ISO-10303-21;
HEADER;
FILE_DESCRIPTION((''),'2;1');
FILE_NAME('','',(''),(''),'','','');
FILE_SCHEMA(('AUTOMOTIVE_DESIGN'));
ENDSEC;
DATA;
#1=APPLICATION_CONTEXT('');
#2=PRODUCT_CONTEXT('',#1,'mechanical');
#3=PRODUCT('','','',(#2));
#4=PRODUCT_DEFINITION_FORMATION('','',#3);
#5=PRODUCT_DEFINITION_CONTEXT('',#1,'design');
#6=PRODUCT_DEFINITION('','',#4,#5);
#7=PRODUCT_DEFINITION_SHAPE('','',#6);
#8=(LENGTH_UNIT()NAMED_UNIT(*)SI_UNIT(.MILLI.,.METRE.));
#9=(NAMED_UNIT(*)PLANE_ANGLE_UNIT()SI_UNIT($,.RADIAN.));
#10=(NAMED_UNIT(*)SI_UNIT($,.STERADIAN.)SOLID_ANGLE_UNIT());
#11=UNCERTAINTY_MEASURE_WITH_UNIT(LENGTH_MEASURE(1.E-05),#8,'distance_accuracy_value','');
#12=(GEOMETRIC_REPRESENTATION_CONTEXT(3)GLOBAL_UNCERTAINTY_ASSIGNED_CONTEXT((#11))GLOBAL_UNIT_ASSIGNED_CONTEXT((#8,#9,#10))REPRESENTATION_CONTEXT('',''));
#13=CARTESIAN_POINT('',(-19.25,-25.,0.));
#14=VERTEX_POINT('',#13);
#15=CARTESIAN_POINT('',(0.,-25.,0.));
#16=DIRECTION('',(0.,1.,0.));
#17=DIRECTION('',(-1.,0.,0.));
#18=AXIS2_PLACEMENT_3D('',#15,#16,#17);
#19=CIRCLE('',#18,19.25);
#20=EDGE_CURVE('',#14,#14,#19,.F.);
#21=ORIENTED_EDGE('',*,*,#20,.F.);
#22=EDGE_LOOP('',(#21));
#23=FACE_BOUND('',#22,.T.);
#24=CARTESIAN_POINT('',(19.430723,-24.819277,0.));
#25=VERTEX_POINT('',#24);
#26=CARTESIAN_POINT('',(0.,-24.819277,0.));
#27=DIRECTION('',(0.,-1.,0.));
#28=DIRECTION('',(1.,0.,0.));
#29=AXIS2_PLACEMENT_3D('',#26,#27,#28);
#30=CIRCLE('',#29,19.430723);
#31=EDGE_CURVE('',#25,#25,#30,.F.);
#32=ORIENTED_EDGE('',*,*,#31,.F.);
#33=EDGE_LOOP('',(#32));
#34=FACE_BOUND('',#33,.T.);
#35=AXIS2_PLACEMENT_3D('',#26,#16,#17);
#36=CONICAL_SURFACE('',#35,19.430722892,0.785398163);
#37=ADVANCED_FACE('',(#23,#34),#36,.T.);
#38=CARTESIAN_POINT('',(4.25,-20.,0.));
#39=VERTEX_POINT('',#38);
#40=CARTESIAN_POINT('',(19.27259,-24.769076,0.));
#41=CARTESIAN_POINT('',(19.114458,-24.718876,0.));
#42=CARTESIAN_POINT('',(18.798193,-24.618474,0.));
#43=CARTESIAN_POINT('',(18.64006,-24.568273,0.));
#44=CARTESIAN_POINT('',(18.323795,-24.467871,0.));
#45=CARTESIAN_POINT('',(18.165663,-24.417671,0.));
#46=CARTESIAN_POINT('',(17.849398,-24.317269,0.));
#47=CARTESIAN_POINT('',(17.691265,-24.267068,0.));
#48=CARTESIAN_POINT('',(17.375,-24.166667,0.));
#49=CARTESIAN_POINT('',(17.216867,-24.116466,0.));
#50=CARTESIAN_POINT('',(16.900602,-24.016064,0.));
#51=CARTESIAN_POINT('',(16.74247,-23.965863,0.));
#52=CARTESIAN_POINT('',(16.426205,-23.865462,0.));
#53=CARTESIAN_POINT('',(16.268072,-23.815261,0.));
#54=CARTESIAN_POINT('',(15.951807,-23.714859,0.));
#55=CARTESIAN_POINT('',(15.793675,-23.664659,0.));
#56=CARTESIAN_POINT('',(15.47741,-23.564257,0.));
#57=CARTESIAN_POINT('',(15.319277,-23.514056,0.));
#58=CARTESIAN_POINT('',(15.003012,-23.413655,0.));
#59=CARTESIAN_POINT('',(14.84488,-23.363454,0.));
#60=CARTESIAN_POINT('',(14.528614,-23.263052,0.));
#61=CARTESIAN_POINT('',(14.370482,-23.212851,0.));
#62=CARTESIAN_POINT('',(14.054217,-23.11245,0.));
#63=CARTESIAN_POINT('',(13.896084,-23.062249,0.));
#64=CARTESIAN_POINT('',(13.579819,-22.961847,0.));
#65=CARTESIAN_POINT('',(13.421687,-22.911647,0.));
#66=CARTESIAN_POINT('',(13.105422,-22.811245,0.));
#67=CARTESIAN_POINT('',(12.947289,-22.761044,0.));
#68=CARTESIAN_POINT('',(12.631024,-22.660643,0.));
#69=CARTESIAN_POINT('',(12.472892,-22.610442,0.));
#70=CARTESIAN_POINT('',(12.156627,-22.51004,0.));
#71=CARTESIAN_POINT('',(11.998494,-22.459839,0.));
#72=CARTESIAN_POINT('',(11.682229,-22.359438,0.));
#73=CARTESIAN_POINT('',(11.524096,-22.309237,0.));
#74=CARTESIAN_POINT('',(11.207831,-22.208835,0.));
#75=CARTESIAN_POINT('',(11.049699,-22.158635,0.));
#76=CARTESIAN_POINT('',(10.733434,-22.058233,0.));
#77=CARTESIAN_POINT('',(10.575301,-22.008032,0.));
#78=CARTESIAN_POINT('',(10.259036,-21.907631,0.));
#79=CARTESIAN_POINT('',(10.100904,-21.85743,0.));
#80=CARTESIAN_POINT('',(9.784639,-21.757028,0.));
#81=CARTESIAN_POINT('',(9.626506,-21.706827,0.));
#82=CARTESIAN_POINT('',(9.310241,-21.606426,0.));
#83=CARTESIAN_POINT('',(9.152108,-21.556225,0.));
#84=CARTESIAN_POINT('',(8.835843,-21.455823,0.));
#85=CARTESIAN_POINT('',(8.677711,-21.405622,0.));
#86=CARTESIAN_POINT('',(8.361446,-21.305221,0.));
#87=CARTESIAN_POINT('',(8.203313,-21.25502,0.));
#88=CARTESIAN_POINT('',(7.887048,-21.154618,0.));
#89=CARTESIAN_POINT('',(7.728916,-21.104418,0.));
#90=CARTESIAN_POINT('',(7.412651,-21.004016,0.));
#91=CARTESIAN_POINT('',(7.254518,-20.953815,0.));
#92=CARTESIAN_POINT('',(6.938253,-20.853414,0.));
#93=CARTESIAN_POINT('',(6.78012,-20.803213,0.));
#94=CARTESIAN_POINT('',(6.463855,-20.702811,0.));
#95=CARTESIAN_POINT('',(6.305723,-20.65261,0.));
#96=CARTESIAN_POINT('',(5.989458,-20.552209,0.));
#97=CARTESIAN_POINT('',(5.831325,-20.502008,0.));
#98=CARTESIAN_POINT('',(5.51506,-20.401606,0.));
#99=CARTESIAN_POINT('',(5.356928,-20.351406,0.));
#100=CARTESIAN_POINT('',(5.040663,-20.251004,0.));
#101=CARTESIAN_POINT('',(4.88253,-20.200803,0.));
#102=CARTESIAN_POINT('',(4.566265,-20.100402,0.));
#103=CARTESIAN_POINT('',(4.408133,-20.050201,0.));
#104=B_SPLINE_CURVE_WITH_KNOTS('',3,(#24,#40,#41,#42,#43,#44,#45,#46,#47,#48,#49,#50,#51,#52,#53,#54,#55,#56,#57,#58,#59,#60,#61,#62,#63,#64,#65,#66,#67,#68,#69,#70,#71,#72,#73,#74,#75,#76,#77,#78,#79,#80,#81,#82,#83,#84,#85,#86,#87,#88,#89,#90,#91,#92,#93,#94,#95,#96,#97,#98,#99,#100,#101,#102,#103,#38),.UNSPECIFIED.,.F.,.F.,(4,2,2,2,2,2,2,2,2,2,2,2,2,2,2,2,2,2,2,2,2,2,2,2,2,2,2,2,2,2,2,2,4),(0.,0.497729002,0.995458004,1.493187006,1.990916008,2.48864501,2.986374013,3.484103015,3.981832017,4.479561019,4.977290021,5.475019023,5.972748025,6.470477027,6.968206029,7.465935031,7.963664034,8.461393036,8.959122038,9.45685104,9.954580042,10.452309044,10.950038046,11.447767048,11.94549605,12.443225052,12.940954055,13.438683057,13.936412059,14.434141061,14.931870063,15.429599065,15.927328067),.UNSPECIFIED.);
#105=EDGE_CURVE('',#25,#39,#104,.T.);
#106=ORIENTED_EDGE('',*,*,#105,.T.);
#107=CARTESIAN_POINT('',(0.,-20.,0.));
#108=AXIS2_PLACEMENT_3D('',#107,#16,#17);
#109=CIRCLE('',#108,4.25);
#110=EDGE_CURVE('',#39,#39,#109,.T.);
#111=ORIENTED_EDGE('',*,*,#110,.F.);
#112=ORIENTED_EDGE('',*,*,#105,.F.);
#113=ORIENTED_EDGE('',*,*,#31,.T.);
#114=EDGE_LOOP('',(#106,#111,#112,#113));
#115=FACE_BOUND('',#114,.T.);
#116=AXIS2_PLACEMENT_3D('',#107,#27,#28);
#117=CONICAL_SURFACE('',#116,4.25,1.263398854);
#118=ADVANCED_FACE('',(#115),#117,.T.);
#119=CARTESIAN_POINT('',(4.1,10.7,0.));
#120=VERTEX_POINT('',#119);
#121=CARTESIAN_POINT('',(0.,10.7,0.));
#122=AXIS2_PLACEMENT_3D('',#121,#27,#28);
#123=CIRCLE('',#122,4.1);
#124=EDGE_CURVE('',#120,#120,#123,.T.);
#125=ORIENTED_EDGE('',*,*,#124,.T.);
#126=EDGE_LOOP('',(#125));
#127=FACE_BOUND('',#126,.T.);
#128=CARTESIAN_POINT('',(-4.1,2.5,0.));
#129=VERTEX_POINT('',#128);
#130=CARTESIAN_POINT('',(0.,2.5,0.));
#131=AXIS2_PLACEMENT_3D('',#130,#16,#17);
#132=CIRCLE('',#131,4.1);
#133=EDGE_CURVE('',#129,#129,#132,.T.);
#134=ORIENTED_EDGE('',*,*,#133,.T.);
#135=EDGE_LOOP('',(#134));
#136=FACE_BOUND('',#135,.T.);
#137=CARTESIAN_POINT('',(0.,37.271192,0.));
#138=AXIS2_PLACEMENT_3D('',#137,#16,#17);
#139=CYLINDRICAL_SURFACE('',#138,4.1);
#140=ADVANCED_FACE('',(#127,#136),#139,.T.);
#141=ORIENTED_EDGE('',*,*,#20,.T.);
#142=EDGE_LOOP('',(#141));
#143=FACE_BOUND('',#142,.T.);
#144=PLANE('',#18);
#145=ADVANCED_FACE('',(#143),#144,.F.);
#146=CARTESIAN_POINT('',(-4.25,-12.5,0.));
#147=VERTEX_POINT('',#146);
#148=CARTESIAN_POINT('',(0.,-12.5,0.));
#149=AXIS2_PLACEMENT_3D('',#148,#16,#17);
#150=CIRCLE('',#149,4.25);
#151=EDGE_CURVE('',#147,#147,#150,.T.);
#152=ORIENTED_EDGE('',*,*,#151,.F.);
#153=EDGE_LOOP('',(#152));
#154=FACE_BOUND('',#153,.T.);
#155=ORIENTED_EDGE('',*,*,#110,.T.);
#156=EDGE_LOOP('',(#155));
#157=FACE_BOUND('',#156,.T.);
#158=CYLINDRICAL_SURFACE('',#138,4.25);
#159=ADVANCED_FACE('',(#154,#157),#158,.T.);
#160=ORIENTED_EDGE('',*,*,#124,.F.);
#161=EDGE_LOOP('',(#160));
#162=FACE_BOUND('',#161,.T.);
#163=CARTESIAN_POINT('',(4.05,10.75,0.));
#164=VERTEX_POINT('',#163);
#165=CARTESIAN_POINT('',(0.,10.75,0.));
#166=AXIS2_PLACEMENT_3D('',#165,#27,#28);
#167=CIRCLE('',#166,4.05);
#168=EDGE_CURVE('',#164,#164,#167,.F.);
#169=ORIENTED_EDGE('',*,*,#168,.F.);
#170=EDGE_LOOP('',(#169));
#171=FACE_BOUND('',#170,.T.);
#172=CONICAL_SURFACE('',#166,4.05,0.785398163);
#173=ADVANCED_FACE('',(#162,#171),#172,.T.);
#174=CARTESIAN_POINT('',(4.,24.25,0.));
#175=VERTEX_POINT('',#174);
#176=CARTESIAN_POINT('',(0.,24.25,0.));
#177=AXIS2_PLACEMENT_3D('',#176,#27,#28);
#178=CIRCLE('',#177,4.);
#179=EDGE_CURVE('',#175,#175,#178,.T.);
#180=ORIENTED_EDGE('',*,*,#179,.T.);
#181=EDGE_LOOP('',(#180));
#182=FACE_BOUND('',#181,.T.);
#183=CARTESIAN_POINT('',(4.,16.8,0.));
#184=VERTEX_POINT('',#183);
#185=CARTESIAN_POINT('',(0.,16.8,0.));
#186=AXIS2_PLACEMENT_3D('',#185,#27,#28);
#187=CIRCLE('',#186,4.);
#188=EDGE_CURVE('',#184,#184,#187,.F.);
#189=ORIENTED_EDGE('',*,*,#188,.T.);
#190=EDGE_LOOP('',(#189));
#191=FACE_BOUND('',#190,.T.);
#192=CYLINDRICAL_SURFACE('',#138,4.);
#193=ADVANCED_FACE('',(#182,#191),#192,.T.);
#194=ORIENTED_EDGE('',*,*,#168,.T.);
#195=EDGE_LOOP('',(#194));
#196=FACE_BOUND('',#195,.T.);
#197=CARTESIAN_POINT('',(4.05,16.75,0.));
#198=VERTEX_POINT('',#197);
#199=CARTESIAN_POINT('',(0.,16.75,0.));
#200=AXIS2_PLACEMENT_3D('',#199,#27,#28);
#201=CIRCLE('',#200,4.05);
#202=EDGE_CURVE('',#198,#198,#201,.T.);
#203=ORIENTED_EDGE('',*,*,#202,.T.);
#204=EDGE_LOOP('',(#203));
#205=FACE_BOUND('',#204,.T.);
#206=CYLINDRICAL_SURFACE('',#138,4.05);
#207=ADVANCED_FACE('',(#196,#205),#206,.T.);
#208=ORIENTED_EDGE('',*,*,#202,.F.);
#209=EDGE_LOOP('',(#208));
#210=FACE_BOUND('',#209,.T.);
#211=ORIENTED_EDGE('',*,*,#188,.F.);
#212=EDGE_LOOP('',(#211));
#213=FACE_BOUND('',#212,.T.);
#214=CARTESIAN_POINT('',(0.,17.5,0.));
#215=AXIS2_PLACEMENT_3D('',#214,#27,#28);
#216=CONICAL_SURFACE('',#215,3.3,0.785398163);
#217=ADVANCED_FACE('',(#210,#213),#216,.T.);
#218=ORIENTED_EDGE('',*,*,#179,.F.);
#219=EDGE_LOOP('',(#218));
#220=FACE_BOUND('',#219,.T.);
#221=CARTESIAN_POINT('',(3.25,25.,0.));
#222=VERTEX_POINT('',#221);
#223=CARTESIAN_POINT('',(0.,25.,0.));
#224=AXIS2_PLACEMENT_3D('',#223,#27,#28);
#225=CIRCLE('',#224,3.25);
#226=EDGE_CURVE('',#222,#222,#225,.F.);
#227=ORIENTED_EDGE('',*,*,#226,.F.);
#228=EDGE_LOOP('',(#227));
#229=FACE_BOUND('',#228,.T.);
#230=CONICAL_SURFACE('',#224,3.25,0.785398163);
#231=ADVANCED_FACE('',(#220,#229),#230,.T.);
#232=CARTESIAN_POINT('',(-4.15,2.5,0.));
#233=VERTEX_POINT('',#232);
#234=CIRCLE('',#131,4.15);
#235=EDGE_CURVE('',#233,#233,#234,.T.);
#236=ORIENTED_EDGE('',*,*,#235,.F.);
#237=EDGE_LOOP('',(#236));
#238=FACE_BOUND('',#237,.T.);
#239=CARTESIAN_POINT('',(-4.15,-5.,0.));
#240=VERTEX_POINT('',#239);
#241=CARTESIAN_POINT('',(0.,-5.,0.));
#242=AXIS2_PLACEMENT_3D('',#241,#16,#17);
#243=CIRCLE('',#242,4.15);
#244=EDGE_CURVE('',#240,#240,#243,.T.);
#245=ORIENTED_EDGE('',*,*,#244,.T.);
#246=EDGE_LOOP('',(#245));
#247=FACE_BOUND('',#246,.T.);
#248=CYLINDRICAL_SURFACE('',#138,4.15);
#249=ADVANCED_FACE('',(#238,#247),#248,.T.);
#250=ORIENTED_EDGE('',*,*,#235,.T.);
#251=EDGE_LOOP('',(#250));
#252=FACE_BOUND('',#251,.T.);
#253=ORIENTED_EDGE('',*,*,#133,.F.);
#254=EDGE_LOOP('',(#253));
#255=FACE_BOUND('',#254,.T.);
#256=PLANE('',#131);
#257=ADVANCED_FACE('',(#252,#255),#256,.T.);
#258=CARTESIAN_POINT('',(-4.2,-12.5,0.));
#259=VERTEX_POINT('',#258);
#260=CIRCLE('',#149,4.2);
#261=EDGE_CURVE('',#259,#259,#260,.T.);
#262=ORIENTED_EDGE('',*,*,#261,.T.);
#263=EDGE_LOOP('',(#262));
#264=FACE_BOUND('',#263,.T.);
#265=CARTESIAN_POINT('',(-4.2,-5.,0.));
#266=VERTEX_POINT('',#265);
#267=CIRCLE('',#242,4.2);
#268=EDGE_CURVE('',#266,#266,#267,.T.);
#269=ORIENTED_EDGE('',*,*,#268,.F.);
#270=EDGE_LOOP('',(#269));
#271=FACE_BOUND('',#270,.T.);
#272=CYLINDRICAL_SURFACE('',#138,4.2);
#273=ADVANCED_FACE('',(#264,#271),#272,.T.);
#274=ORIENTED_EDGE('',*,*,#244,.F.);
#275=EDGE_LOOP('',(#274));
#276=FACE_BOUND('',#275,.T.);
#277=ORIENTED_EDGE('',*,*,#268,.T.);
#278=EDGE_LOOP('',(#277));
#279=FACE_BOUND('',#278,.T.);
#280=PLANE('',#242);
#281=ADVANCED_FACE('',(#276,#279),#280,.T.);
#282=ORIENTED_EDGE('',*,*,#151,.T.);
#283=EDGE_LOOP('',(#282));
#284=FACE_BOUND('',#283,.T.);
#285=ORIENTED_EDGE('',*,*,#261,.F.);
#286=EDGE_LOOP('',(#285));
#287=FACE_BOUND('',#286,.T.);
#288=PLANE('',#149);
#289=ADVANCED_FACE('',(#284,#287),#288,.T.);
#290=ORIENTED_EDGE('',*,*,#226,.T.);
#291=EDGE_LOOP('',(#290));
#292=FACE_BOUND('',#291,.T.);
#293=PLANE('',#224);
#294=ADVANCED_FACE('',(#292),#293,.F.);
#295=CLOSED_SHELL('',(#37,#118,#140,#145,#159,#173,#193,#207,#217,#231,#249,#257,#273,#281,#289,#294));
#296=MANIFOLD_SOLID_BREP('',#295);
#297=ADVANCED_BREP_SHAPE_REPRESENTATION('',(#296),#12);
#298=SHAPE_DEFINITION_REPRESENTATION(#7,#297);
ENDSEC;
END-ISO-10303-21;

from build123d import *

# Parameters (mm, degrees)
CHAMFER1_SIZE   = 0.75
CHAMFER1_SIZE_2 = 0.597274803


with BuildPart() as part:
    # Sketch1 → Revolve1 (revolve)
    with BuildSketch(Plane.XY):
        Polygon((-4.2, -12.5), (-4.25, -12.5), (-4.25, -20), (-20, -25), (0, -25), (0, 25), (-4, 25), (-4, 17.5), (-4.05, 17.5), (-4.05, 10), (-4.1, 10), (-4.1, 2.5), (-4.15, 2.5), (-4.15, -5), (-4.2, -5), align=None)
    revolve(axis=Axis((0, 37.271191626, 0), (0, -1, 0)))

    # Chamfer1
    # the kernel refuses this chamfer: 0.75, 0.597274803 mm, written as the material it adds along each edge
    with BuildSketch(Plane(origin=(0, 10, 0), x_dir=(-1, 0, 0), z_dir=(0, 0, 1))) as chamfer1_piece_1_section:
        Polygon((4.05, -CHAMFER1_SIZE), (4.05 + CHAMFER1_SIZE, 0), (4.05, 0), align=None)
    chamfer1_piece_1 = revolve(axis=Axis((0, 10, 0), (0, -1, 0)), mode=Mode.PRIVATE)
    chamfer1_piece_1 = chamfer1_piece_1 & Plane(origin=(0, 10.727876621, 0), x_dir=(-1, 0, 0), z_dir=(0, -1, 0)) * Cylinder(4.1, 20, mode=Mode.PRIVATE)
    add(chamfer1_piece_1)
    # the kernel refuses this chamfer: 0.75, 0.597274803 mm, written as the material it takes off along each edge
    with BuildSketch(Plane(origin=(0, 25, 0), x_dir=(-1, 0, 0), z_dir=(0, 0, 1))) as chamfer1_2_piece_1:
        Polygon((4, CHAMFER1_SIZE), (4 - CHAMFER1_SIZE, 0), (4, 0), align=None)
    revolve(axis=Axis((0, 25, 0), (0, -1, 0)), mode=Mode.SUBTRACT)
    with BuildSketch(Plane(origin=(0, 17.5, 0), x_dir=(-1, 0, 0), z_dir=(0, 0, 1))) as chamfer1_2_piece_2_section:
        Polygon((4.05, CHAMFER1_SIZE), (4.05 - CHAMFER1_SIZE, 0), (4.05, 0), align=None)
    chamfer1_2_piece_2 = revolve(axis=Axis((0, 17.5, 0), (0, -1, 0)), mode=Mode.PRIVATE)
    chamfer1_2_piece_2 = chamfer1_2_piece_2 - Plane(origin=(0, 16.772104401, 0), x_dir=(-1, 0, 0), z_dir=(0, -1, 0)) * Cylinder(4, 17, mode=Mode.PRIVATE)
    add(chamfer1_2_piece_2, mode=Mode.SUBTRACT)
    with BuildSketch(Plane(origin=(0, -25, 0), x_dir=(-1, 0, 0), z_dir=(0, 0, 1))) as chamfer1_2_piece_3:
        Polygon((20 - CHAMFER1_SIZE_2 * 0.953124266375, -CHAMFER1_SIZE_2 * 0.302579132183), (20 - CHAMFER1_SIZE, 0), (20, 0), align=None)
    revolve(axis=Axis((0, -25, 0), (0, -1, 0)), mode=Mode.SUBTRACT)


solid = part.part
